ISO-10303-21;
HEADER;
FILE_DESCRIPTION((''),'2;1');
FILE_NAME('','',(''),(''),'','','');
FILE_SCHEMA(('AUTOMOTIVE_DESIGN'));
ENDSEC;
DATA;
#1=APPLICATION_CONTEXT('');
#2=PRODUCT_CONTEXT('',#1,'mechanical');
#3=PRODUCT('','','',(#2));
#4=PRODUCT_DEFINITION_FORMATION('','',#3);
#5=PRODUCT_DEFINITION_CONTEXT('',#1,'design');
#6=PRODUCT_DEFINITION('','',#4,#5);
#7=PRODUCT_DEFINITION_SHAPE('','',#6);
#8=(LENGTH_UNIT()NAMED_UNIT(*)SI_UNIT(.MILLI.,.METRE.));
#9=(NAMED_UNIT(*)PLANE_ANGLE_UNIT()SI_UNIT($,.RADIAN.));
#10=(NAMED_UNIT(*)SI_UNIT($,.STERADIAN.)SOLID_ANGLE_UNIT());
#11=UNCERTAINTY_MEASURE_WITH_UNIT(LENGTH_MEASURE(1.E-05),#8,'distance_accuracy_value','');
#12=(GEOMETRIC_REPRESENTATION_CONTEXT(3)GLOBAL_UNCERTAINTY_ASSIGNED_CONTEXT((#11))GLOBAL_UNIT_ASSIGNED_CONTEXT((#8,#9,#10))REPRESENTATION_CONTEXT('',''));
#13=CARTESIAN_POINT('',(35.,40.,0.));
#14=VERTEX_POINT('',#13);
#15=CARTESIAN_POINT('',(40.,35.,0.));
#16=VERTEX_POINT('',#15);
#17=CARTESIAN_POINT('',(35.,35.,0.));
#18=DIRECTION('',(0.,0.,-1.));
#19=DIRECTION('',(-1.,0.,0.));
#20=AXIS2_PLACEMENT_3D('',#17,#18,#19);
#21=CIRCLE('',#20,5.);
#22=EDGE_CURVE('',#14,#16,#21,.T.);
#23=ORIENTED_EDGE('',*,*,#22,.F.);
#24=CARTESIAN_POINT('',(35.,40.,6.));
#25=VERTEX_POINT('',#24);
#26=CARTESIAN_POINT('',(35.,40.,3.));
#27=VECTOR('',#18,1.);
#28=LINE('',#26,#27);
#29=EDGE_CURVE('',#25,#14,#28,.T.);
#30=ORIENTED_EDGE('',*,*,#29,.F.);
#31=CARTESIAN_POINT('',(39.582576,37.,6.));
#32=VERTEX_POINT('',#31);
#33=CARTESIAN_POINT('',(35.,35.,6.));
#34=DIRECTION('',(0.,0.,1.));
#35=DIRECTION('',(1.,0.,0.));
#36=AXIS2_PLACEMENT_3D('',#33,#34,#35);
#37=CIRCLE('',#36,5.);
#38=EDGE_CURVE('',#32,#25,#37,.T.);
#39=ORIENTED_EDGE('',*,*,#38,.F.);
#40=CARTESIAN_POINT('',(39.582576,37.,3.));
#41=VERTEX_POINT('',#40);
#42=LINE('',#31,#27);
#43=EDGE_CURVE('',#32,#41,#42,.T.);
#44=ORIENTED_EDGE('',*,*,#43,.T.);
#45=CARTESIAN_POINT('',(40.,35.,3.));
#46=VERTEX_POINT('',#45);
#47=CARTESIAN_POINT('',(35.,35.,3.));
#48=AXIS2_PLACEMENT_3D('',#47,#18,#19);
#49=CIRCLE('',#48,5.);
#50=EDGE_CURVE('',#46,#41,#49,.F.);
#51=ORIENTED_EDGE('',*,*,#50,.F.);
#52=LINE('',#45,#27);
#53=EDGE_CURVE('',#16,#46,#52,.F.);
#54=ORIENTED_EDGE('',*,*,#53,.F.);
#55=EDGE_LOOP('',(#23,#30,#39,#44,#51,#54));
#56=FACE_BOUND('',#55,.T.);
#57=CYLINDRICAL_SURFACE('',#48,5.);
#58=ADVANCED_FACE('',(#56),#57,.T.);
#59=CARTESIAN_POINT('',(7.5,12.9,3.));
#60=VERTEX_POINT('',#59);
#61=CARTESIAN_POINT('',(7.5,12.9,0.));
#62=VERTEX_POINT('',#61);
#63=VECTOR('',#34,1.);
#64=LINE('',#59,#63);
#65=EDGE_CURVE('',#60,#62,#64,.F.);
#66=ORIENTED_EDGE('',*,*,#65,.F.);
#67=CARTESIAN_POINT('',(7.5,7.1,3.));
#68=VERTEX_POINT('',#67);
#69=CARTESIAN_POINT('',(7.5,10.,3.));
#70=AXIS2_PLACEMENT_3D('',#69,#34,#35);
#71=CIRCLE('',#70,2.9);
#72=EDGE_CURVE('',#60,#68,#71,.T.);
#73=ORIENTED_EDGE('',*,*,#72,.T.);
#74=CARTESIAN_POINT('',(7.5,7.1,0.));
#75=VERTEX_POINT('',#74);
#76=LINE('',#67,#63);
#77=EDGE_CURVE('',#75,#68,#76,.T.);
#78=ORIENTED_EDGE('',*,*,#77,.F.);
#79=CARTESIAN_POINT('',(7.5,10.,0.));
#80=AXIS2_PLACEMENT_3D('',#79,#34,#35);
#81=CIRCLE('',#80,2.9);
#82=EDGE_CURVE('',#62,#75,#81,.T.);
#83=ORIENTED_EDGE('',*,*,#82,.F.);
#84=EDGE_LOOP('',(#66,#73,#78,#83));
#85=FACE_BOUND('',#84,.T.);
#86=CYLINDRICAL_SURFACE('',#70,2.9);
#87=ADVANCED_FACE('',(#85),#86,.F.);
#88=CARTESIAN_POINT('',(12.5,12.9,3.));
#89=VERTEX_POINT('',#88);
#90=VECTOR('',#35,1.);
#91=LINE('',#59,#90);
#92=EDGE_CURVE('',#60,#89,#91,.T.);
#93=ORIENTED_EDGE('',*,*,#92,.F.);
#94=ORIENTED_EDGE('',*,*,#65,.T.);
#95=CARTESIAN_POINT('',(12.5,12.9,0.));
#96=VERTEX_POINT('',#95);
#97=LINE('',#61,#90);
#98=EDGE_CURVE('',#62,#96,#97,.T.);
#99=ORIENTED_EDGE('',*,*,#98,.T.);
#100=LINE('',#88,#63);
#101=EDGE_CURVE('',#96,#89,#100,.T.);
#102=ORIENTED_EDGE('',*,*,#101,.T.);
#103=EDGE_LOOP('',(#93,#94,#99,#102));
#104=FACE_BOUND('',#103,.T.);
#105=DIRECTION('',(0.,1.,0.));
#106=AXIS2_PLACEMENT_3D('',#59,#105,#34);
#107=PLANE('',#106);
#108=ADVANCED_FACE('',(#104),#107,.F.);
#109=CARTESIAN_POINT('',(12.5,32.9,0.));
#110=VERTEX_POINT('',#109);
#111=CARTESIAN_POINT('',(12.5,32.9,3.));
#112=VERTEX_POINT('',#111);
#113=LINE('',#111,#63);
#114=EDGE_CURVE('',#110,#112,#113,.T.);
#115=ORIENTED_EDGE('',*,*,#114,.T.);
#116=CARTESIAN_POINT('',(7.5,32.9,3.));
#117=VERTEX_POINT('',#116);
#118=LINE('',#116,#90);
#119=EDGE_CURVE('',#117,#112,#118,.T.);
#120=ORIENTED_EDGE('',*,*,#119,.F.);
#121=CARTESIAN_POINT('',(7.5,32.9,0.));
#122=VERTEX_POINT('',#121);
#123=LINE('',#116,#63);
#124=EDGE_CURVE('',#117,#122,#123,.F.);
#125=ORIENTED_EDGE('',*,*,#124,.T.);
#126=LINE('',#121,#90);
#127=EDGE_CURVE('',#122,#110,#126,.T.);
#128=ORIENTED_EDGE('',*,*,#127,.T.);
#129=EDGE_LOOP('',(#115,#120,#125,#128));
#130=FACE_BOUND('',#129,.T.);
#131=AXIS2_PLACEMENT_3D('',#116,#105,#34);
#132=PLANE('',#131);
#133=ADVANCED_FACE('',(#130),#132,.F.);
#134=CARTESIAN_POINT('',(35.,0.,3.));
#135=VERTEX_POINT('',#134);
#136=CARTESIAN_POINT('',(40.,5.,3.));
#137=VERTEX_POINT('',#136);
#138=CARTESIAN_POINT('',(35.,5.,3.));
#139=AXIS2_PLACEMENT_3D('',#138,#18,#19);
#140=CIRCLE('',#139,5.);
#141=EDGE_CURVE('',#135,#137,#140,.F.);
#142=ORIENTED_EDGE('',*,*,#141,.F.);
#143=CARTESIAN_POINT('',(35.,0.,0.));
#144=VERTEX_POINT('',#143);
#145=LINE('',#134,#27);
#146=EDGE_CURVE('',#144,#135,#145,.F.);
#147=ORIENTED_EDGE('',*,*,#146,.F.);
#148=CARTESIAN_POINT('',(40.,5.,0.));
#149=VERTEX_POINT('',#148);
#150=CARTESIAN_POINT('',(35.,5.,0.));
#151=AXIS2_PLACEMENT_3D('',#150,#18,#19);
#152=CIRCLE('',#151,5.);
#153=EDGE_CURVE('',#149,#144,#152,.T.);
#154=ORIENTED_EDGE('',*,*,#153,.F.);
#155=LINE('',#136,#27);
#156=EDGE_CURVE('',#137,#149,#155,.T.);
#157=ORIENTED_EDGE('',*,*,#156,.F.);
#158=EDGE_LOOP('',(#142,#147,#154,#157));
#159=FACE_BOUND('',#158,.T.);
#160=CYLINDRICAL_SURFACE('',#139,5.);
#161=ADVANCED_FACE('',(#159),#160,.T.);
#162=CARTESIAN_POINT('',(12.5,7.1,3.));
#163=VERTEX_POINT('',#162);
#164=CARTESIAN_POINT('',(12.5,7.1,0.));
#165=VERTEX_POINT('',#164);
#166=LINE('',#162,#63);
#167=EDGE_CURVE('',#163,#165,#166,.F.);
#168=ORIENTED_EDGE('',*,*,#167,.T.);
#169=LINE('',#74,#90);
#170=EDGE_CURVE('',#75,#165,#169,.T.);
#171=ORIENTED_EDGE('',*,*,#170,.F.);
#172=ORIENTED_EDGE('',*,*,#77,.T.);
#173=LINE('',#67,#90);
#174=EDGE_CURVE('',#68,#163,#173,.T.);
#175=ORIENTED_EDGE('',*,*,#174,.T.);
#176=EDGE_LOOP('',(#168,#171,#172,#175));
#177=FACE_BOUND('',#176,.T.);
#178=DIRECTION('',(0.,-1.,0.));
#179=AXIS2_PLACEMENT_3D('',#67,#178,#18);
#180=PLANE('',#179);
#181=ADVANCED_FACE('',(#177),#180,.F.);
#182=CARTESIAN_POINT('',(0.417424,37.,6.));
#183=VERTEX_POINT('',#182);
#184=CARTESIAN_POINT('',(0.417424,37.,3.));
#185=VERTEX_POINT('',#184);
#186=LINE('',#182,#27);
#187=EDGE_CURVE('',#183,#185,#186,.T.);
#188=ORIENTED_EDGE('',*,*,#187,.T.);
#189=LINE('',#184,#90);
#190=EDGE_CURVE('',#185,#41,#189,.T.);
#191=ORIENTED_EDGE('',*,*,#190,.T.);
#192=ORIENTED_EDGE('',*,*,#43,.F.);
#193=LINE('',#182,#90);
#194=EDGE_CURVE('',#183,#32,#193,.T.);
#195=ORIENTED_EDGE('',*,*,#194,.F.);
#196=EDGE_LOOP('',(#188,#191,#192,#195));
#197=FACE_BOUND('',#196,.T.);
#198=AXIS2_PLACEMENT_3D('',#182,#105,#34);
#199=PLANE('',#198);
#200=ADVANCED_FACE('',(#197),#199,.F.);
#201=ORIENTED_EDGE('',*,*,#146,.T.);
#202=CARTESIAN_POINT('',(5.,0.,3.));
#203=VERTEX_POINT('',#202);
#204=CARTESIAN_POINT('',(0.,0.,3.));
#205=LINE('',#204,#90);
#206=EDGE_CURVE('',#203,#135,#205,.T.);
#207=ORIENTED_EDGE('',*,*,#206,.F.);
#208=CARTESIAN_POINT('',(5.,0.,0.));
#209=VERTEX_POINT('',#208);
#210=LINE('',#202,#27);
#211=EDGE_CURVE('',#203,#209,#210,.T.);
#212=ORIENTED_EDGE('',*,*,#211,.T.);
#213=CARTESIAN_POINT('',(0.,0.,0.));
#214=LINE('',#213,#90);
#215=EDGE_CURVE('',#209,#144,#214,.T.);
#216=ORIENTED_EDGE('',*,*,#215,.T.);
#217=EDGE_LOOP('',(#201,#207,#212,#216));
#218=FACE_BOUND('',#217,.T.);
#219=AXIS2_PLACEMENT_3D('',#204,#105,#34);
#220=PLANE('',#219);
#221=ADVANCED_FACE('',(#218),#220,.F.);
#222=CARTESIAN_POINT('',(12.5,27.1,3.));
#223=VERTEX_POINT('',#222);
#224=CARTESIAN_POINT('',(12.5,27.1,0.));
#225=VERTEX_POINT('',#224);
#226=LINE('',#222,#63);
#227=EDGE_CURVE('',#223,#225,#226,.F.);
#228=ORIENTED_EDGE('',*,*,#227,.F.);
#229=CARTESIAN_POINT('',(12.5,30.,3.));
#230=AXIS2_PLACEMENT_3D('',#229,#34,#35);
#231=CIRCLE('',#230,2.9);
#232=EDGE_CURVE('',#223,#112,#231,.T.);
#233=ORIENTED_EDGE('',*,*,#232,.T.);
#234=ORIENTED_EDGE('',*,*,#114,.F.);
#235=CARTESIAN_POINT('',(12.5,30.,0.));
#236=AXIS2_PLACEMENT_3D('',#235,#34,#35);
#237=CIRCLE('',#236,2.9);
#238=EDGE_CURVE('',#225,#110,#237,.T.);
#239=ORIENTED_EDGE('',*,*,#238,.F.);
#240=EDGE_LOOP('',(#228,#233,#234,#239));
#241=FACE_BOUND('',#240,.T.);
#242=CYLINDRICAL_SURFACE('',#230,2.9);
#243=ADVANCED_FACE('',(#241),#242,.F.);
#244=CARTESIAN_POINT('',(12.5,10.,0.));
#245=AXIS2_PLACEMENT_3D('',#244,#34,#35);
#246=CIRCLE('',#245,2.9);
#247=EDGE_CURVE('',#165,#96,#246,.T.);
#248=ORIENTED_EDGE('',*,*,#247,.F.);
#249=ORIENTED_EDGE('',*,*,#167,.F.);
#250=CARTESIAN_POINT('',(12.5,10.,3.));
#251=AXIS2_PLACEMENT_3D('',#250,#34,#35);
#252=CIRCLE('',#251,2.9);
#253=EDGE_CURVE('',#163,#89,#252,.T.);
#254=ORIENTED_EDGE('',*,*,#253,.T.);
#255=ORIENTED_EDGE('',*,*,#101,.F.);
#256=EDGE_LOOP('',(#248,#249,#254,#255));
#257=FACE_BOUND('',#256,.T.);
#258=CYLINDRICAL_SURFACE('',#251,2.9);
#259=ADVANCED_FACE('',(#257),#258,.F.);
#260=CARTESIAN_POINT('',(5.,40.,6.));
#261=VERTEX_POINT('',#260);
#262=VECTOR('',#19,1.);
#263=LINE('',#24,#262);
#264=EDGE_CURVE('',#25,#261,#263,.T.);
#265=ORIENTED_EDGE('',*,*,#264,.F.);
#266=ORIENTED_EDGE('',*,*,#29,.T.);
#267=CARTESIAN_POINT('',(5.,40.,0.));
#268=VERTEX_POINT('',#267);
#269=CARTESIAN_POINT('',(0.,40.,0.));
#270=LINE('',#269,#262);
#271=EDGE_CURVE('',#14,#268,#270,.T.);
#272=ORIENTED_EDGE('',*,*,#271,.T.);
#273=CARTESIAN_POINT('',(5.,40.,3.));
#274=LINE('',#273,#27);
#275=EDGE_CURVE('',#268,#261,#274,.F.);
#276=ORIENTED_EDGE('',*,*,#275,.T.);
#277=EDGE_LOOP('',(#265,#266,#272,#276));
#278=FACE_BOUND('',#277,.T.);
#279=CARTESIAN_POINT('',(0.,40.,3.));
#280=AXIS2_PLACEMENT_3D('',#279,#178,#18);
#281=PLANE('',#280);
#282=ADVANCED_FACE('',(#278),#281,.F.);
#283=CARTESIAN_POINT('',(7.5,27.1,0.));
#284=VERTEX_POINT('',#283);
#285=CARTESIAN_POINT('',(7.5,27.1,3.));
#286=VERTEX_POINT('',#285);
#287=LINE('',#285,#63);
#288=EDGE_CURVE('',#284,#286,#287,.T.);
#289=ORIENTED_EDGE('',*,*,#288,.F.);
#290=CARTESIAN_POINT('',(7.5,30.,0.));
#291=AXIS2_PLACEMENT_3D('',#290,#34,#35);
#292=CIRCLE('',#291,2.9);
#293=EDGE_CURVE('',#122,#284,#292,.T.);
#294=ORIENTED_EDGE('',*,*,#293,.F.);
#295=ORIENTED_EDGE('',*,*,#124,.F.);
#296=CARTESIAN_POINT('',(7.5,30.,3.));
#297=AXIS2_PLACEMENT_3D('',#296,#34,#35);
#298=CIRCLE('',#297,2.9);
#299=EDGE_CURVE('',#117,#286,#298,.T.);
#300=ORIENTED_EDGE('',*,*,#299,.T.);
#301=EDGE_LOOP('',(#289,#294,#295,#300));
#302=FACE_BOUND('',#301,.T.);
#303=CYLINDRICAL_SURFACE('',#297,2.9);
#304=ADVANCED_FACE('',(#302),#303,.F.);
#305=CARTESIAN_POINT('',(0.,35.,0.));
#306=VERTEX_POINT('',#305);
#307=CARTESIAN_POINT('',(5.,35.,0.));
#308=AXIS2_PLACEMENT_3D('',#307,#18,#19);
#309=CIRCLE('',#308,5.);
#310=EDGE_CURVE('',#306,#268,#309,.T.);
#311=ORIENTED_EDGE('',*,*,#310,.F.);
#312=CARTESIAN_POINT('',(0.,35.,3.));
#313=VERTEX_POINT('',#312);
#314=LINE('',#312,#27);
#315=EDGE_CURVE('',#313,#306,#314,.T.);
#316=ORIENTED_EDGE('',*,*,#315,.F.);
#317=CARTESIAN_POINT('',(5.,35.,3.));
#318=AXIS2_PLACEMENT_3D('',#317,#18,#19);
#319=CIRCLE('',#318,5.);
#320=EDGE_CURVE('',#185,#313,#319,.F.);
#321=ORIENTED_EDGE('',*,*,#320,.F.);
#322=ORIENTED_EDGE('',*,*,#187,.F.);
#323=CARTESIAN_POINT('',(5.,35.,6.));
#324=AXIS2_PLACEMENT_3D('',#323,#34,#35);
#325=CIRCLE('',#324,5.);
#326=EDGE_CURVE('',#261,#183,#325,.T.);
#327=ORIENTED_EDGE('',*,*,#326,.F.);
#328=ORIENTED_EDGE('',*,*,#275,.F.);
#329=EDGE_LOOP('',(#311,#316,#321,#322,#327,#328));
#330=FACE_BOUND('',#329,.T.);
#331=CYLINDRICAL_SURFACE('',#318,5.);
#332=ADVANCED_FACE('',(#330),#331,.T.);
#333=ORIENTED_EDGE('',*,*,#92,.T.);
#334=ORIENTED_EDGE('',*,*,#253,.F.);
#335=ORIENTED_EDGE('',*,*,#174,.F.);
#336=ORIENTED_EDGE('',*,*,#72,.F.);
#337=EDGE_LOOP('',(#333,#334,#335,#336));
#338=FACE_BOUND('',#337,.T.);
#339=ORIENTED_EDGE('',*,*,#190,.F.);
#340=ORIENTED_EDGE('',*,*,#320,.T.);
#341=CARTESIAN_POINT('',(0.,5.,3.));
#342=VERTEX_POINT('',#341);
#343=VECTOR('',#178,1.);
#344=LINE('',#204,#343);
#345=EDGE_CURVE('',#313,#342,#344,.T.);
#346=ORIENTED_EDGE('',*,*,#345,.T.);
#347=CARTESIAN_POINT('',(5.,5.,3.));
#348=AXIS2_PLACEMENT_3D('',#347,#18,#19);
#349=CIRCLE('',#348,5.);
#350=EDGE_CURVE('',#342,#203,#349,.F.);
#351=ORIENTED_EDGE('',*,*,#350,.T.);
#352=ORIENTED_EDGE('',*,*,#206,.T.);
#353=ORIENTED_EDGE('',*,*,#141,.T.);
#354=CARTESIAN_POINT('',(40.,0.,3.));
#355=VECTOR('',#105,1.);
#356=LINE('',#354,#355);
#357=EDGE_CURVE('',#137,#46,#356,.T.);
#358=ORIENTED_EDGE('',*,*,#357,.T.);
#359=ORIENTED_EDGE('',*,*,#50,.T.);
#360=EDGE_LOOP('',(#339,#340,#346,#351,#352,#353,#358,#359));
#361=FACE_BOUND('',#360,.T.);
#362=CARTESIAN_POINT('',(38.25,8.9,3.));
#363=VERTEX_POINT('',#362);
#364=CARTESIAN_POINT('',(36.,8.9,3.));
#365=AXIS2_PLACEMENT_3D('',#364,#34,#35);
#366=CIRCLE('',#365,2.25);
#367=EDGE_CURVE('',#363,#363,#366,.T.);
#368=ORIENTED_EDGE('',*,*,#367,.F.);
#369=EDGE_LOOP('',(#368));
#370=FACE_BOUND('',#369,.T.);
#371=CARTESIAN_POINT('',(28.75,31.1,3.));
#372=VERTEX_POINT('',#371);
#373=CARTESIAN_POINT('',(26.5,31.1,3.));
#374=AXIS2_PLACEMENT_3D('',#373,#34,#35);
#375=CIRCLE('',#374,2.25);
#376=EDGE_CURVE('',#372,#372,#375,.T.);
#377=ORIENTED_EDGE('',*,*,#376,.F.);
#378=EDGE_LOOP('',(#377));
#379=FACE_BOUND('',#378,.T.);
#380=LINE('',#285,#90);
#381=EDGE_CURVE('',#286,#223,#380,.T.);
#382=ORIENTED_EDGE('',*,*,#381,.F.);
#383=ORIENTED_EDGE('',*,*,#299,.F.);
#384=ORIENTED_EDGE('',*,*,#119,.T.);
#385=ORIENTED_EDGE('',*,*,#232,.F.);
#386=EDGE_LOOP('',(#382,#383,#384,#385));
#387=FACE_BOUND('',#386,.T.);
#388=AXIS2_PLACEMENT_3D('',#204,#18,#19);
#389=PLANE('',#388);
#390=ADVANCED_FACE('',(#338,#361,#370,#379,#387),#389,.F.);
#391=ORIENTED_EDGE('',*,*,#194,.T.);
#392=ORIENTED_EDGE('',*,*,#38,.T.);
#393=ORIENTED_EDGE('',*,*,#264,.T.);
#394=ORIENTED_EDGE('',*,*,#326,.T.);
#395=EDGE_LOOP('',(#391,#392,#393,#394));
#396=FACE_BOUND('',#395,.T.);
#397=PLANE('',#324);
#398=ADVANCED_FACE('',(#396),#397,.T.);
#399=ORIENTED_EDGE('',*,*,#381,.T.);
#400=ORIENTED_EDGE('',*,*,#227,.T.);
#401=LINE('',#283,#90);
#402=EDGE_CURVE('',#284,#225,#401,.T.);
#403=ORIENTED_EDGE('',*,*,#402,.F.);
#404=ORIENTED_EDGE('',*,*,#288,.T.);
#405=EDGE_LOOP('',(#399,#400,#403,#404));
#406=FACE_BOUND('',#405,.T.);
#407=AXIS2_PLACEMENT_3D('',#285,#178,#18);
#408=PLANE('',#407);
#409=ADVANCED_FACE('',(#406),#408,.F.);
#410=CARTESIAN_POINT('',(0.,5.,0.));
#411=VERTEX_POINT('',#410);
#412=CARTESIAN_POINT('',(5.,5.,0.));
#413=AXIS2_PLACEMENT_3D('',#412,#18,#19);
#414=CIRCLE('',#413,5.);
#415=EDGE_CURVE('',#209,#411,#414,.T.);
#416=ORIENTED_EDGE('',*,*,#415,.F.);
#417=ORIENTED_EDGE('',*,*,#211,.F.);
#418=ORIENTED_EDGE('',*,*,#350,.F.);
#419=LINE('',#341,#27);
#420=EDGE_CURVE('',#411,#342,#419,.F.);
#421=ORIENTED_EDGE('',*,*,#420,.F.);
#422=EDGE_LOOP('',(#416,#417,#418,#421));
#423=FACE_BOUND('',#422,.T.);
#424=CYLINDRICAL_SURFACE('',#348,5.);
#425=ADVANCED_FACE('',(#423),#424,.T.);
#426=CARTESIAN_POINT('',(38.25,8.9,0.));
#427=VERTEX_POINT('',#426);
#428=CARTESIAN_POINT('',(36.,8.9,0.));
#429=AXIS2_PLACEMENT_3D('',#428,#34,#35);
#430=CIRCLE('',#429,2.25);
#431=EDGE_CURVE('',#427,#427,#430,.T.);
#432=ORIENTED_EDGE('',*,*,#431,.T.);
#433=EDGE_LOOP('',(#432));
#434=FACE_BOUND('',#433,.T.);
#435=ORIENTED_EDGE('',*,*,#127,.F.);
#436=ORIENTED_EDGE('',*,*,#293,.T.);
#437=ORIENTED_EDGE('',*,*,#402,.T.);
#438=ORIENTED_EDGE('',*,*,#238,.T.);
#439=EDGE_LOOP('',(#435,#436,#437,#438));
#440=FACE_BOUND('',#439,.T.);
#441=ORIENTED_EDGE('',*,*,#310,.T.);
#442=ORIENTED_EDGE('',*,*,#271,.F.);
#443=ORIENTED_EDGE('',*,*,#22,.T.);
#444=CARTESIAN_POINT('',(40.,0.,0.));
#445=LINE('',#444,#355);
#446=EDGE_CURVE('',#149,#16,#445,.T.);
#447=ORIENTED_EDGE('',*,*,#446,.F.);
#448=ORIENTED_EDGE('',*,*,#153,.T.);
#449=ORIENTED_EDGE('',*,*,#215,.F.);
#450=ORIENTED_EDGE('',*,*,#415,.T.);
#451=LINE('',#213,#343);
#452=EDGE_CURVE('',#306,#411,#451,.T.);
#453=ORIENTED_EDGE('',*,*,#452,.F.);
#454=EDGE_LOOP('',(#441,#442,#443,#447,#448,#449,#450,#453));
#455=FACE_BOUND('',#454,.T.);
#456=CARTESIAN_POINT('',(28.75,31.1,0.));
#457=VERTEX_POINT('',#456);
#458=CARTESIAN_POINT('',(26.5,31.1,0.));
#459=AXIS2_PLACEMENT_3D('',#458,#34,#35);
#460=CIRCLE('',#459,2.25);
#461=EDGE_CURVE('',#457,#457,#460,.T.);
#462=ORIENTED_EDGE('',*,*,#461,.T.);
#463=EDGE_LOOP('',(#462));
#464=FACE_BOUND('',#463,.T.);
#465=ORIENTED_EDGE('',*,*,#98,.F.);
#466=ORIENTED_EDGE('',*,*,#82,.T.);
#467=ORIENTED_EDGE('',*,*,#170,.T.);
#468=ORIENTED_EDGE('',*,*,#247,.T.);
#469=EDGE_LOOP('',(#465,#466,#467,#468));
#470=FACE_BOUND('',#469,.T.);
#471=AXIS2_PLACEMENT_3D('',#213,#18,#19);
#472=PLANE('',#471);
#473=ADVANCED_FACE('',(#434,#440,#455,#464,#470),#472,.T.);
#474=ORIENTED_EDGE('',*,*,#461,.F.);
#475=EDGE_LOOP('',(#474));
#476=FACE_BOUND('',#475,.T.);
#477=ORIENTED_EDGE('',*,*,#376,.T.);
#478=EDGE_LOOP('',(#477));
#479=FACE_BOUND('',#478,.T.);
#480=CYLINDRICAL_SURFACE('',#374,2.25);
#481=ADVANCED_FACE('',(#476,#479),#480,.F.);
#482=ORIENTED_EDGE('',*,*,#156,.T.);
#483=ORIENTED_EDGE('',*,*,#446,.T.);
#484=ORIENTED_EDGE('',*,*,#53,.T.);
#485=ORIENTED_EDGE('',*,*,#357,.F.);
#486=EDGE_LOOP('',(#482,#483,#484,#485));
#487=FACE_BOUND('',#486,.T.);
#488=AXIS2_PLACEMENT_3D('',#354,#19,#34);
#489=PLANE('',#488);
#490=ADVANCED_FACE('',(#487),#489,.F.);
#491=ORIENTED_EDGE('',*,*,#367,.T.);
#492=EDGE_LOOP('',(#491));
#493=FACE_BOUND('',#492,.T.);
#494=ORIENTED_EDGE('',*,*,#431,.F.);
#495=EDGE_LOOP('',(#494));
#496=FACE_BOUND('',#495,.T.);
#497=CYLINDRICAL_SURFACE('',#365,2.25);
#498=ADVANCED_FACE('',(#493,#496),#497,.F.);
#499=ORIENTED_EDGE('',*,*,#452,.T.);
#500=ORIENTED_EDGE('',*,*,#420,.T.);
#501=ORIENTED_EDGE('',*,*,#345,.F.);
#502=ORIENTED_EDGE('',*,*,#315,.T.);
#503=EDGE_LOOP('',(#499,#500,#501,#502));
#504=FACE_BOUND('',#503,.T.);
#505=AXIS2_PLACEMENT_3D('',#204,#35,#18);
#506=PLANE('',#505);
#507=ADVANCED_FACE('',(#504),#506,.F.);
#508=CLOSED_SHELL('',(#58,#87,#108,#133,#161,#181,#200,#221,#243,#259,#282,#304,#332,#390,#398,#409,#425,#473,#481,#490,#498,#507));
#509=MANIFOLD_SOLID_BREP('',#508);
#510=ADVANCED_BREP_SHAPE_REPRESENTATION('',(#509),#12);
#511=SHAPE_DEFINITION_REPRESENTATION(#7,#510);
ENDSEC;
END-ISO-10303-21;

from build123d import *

# Parameters (mm, degrees)
SKETCH1_W                  = 40
SKETCH1_H                  = 40
BOSS_EXTRUDE1_DEPTH        = 3
F_4_5_4_5_DIAMETER_HOLE1_D = 4.5
M5_CLEARANCE_SLOT1_DEPTH   = 3
FILLET1_R                  = 5
BOSS_EXTRUDE2_START        = 3
BOSS_EXTRUDE2_DEPTH        = 3


# Read off the part's stored shape, not the designer's step: M5 Clearance Slot1
with BuildPart() as part:
    # Sketch1 → Boss-Extrude1 (new body)
    with BuildSketch(Plane.XY):
        with Locations((20, 20)):
            Rectangle(SKETCH1_W, SKETCH1_H)
    extrude(amount=BOSS_EXTRUDE1_DEPTH)

    # Ø4.5 (4.5) Diameter Hole1 (through all)
    with Locations(Plane.XY.offset(3)):
        with Locations((26.5, 31.1), (36, 8.9)):
            Hole(F_4_5_4_5_DIAMETER_HOLE1_D / 2)

    # M5 Clearance Slot1 outline → M5 Clearance Slot1 (cut)
    with BuildSketch(Plane.XY):
        with BuildLine():
            Line((7.5, 7.1), (12.5, 7.1))
            ThreePointArc((12.5, 7.1), (15.4, 10), (12.5, 12.9))
            Line((12.5, 12.9), (7.5, 12.9))
            ThreePointArc((7.5, 12.9), (4.6, 10), (7.5, 7.1))
        make_face()
        with BuildLine():
            Line((7.5, 27.1), (12.5, 27.1))
            ThreePointArc((12.5, 27.1), (15.4, 30), (12.5, 32.9))
            Line((12.5, 32.9), (7.5, 32.9))
            ThreePointArc((7.5, 32.9), (4.6, 30), (7.5, 27.1))
        make_face()
    extrude(amount=M5_CLEARANCE_SLOT1_DEPTH, mode=Mode.SUBTRACT)

    # Fillet1
    fillet1_edges = [part.edges().sort_by_distance(p)[0] for p in [
        (0, 40, 1.5),
        (40, 40, 1.5),
        (40, 0, 1.5),
        (0, 0, 1.5),
    ]]
    fillet(fillet1_edges, radius=FILLET1_R)

    # Sketch10 → Boss-Extrude2 (add)
    with BuildSketch(Plane.XY.offset(3).offset(BOSS_EXTRUDE2_START)):
        with BuildLine():
            Line((0.417424305, 37), (39.582575695, 37))
            ThreePointArc((39.582575695, 37), (37.738612788, 39.183300133), (35, 40))
            Line((35, 40), (5, 40))
            ThreePointArc((5, 40), (2.261387212, 39.183300133), (0.417424305, 37))
        make_face()
    extrude(amount=-BOSS_EXTRUDE2_DEPTH)


solid = part.part
